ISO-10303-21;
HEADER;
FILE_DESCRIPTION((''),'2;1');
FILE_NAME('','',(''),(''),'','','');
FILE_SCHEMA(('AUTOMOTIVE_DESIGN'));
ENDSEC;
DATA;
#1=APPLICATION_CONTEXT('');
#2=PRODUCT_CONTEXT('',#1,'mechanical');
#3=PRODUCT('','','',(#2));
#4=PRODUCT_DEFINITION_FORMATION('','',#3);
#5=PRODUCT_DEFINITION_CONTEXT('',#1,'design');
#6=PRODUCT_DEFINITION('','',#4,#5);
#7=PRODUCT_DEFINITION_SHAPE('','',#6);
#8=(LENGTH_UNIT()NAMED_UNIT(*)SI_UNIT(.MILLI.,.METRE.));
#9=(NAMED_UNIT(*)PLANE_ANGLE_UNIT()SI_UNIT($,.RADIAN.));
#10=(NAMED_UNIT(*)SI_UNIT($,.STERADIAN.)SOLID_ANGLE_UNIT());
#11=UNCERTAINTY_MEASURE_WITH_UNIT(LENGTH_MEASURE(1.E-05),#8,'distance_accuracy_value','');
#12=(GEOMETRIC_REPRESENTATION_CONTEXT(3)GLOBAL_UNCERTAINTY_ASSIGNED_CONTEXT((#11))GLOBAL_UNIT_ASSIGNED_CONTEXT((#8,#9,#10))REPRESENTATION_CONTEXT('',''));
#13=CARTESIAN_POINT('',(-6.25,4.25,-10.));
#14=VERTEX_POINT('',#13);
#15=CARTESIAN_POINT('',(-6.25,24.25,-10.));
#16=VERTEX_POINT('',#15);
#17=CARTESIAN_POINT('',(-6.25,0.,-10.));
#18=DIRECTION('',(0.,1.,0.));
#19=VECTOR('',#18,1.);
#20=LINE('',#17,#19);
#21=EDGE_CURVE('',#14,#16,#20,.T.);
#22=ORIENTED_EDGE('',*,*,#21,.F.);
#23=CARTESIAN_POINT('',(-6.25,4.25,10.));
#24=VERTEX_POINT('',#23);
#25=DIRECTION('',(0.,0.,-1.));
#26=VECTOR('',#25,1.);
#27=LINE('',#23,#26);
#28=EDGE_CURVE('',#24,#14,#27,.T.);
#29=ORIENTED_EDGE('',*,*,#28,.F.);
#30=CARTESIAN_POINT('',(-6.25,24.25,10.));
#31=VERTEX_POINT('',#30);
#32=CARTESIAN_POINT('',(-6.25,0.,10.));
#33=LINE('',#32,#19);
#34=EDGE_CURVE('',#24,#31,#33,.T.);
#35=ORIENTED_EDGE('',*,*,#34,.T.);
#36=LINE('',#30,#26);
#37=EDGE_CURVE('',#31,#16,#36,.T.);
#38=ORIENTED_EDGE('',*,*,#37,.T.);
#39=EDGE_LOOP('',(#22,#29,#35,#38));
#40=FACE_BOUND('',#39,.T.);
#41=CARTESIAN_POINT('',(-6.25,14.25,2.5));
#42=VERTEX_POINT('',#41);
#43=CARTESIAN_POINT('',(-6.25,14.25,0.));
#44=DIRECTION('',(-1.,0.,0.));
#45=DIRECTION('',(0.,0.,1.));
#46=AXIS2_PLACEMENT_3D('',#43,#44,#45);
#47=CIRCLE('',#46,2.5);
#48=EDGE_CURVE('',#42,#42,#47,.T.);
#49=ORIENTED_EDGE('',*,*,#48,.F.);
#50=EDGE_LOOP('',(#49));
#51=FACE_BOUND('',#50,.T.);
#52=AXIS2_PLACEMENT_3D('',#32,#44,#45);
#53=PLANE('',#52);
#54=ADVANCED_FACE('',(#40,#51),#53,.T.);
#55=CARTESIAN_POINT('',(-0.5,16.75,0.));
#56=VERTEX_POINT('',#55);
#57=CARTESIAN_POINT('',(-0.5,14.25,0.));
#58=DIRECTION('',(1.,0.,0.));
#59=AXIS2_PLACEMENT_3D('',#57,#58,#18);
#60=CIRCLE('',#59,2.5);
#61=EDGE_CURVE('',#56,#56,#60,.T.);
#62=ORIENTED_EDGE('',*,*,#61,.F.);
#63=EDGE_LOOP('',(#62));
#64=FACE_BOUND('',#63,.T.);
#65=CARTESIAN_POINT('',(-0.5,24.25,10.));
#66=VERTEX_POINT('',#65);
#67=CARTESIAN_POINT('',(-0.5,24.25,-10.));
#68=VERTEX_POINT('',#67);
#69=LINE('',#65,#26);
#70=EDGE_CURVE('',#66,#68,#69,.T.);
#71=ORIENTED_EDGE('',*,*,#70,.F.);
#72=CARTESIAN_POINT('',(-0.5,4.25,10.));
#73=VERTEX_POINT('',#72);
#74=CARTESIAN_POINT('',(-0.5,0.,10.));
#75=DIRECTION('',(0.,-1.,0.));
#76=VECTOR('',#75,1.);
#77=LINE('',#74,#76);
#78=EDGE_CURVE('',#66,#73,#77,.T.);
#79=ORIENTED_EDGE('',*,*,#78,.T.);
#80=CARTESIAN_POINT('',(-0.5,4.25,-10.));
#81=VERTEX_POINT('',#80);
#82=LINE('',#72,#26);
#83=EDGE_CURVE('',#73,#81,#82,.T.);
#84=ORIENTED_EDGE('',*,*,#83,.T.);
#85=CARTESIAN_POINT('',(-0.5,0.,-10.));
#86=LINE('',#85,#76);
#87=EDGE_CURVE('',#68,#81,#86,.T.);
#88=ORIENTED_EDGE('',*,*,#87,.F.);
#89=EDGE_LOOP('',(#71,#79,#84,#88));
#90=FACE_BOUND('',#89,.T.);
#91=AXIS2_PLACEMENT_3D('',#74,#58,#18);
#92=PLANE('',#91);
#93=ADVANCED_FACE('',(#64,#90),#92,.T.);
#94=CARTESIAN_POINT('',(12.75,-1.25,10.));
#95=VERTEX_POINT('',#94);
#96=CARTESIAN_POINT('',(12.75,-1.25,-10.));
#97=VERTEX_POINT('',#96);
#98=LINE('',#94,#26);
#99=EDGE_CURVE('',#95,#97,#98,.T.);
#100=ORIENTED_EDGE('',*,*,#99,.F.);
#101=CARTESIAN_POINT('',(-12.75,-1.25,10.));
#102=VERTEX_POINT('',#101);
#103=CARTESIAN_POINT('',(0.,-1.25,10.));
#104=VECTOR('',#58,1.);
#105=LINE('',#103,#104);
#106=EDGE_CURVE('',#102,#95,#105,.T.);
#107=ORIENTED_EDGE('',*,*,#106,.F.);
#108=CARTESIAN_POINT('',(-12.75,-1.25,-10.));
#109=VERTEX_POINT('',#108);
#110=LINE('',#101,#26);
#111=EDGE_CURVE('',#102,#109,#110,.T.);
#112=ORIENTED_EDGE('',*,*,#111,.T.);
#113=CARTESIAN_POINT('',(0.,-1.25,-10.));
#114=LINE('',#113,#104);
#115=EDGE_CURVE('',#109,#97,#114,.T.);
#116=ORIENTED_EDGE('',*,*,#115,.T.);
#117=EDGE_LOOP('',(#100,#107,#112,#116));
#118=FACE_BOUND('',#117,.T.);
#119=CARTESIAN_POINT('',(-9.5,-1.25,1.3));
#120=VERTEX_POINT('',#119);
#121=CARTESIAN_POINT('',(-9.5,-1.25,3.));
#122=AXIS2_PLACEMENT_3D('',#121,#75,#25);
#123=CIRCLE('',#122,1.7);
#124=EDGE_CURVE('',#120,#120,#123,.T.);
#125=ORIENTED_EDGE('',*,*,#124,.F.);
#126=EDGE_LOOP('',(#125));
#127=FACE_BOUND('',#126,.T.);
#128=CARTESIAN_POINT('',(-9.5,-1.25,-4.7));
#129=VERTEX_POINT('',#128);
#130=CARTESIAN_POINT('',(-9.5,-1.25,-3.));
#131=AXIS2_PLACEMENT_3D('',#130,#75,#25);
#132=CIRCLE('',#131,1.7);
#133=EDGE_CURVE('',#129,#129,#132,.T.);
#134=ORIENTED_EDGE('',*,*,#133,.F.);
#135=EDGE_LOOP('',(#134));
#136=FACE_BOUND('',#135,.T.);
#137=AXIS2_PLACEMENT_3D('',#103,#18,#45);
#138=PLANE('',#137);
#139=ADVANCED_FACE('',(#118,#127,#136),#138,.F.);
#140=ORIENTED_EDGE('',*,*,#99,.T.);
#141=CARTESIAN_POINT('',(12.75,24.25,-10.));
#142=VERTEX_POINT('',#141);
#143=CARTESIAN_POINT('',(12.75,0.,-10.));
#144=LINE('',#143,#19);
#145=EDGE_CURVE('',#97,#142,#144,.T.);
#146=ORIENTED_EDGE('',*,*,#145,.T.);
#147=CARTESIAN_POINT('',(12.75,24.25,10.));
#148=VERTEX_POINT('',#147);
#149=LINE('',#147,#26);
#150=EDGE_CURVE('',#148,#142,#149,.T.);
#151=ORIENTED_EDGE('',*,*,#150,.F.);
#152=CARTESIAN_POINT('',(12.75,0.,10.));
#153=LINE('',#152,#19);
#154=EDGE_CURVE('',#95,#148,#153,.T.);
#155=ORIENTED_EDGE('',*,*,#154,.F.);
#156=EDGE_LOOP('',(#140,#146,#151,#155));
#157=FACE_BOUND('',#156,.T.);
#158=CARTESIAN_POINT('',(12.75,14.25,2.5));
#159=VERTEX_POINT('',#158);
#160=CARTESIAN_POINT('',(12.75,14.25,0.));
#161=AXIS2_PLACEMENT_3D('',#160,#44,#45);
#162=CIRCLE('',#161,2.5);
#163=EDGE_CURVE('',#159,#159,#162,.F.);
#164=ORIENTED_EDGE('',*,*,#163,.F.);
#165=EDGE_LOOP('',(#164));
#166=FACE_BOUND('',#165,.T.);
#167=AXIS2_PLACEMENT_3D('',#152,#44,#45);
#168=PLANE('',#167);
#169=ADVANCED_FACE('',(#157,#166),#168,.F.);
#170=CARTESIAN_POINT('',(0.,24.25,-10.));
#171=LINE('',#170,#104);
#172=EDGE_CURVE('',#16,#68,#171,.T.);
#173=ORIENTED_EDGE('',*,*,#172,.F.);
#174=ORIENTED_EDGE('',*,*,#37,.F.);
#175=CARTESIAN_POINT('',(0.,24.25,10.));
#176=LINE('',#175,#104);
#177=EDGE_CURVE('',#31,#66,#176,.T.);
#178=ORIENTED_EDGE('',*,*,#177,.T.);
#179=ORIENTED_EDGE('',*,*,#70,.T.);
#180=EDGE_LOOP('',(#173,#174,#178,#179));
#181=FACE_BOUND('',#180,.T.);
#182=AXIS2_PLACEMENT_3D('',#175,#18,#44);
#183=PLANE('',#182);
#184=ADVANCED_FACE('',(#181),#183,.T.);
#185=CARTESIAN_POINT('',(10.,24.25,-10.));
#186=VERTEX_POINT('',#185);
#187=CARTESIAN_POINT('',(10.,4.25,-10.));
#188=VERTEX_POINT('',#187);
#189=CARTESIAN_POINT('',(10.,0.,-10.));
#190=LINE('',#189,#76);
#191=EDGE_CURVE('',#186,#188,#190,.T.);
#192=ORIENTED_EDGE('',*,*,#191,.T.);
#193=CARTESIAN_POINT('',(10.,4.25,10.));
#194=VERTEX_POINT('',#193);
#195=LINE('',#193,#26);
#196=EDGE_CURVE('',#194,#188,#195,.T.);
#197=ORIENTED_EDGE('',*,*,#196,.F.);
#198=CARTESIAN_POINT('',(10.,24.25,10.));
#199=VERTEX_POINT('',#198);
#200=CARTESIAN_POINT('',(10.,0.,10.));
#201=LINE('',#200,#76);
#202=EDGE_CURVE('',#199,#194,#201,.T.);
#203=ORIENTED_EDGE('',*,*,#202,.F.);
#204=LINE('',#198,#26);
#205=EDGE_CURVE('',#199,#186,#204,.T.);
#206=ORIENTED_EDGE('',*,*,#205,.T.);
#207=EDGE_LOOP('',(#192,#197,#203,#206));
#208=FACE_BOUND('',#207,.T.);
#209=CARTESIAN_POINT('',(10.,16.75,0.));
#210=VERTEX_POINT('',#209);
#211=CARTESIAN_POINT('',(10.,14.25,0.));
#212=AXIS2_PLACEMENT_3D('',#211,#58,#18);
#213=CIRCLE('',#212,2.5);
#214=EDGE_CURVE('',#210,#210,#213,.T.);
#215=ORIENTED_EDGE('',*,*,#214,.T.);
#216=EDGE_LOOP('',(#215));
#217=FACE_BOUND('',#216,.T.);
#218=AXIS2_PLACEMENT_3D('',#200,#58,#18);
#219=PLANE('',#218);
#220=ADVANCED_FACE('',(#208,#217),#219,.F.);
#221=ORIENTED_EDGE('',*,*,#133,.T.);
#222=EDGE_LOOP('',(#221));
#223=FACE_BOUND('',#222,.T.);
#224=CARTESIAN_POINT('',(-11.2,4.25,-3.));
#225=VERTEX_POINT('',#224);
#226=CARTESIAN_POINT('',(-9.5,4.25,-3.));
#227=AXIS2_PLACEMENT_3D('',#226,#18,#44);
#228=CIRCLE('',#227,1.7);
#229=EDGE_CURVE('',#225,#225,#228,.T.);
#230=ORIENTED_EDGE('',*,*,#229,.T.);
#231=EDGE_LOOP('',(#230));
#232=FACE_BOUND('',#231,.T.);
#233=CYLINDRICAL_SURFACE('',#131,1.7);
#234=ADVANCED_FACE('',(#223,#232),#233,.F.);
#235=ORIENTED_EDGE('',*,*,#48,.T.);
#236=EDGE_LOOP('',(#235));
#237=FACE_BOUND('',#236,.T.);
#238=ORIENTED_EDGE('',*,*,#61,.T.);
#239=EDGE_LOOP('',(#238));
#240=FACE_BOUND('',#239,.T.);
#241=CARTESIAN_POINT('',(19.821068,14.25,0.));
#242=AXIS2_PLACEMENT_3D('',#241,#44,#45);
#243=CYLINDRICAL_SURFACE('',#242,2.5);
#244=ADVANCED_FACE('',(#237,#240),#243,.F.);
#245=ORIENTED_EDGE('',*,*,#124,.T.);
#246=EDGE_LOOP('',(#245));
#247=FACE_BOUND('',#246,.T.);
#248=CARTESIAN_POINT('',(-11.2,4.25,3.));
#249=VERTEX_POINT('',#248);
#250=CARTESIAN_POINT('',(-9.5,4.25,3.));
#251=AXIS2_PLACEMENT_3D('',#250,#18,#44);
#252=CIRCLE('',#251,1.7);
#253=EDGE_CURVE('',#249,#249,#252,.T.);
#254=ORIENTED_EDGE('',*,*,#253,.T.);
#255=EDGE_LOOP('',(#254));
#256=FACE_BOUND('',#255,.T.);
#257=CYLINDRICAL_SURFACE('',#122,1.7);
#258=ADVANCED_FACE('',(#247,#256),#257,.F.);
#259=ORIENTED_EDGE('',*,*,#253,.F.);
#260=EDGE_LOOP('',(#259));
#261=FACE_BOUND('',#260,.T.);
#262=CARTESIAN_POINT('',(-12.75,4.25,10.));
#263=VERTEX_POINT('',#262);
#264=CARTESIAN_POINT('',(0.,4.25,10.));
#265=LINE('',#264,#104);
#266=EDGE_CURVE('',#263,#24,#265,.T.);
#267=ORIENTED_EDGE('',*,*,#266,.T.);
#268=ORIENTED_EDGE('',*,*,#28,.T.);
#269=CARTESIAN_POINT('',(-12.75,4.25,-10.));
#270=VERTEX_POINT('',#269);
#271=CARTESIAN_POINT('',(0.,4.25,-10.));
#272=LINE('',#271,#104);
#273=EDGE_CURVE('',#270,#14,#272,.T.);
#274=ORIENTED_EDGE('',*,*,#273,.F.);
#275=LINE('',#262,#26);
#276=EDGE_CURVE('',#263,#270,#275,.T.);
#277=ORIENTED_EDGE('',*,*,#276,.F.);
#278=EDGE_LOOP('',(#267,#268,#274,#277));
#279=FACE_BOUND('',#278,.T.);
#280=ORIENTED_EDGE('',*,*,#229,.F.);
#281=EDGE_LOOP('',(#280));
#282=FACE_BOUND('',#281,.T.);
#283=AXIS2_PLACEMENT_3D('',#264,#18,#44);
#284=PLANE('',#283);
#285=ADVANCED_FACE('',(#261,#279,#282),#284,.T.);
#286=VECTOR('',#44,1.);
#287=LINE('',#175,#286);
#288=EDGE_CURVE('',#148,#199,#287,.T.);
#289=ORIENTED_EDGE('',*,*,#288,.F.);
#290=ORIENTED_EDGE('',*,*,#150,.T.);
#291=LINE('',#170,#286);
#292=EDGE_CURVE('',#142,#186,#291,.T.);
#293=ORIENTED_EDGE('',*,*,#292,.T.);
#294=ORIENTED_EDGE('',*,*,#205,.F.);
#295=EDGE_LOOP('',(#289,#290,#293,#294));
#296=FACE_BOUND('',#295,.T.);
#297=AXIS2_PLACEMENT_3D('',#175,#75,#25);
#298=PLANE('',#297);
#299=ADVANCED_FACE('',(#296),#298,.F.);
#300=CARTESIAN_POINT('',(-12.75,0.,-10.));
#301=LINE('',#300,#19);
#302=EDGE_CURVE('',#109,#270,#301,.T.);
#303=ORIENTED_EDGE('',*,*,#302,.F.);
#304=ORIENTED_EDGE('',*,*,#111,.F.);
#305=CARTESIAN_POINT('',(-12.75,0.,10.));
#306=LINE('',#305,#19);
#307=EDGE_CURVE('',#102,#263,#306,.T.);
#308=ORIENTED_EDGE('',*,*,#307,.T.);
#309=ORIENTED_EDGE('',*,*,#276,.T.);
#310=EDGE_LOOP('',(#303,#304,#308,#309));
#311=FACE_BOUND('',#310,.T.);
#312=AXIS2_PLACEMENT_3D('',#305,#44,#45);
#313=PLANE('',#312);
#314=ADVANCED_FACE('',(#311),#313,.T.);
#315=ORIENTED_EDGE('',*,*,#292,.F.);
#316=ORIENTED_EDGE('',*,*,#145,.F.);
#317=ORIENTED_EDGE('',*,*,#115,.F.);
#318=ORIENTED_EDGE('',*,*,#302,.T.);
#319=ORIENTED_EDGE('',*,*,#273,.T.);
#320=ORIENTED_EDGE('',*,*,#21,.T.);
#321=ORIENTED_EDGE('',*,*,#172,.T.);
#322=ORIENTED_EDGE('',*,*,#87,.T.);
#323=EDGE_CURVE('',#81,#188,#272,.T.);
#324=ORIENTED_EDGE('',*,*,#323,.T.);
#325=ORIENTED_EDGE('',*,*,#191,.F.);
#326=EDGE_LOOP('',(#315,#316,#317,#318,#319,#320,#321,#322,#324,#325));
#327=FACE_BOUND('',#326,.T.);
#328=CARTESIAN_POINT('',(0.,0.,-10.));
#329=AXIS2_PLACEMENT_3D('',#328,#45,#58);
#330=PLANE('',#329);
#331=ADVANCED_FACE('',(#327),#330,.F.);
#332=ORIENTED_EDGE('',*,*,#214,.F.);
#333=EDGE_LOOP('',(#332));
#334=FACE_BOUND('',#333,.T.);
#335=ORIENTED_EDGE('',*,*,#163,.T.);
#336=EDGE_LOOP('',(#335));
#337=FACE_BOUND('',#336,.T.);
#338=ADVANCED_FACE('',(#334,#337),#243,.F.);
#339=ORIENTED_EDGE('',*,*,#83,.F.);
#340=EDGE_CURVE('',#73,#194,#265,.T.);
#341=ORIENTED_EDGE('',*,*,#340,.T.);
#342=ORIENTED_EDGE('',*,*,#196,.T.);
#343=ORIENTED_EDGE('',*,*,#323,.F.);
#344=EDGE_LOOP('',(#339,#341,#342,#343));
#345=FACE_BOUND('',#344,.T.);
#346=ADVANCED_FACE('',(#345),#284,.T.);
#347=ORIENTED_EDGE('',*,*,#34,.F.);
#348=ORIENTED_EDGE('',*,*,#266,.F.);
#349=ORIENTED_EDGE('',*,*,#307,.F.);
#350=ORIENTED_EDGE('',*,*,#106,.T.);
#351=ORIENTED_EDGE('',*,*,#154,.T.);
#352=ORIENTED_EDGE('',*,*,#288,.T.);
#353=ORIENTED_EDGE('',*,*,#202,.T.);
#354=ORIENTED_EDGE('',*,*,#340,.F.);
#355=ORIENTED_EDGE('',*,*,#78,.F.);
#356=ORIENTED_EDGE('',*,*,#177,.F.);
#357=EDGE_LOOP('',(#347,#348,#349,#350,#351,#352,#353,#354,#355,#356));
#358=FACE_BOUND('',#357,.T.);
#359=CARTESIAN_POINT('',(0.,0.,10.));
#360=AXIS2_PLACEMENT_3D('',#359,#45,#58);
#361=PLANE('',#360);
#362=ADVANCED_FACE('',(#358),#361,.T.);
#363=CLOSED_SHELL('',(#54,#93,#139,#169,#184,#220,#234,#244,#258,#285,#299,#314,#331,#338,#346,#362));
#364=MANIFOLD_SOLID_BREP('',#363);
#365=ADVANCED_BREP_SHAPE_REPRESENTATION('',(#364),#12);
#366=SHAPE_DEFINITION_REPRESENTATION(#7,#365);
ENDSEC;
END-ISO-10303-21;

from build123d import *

# Parameters (mm, degrees)
BODY_START           = -10
BODY_DEPTH           = 20
M3_CLEARANCE_HOLE1_D = 3.4
CUT_EXTRUDE1_REACH   = 34.389
SKETCH4_R            = 2.5


# Read off the part's stored shape, not the designer's step: Body
with BuildPart() as part:
    # Body outline → Body (new body)
    with BuildSketch(Plane.XY.offset(BODY_START)):
        Polygon((10, 24.25), (10, 4.25), (-0.5, 4.25), (-0.5, 24.25), (-6.25, 24.25), (-6.25, 4.25), (-12.75, 4.25), (-12.75, -1.25), (12.75, -1.25), (12.75, 24.25), align=None)
    extrude(amount=BODY_DEPTH)

    # M3 Clearance Hole1 (through all)
    with Locations(Plane(origin=(0, -1.25, 0), x_dir=(-1, 0, 0), z_dir=(0, -1, 0))):
        with Locations((9.5, -3), (9.5, 3)):
            Hole(M3_CLEARANCE_HOLE1_D / 2)

    # Cut-Extrude1: up to this face of the body (flat: up to its plane)
    cut_extrude1_end = Plane(part.part.faces().sort_by_distance((12.75, 11.5, 0))[0])
    # Sketch4 → Cut-Extrude1 (cut, up to the picked face)
    with BuildSketch(Plane.ZY.offset(6.25), mode=Mode.PRIVATE) as cut_extrude1_sk1:
        with Locations((0, 14.25)):
            Circle(SKETCH4_R)
    cut_extrude1_tool1 = split(extrude(cut_extrude1_sk1.sketch, amount=-CUT_EXTRUDE1_REACH, mode=Mode.PRIVATE), bisect_by=cut_extrude1_end, keep=Keep.BOTH, mode=Mode.PRIVATE)
    add(cut_extrude1_tool1.solids().sort_by(Axis((-6.25, 14.25, 0), (1, 0, 0)))[0], mode=Mode.SUBTRACT)


solid = part.part
